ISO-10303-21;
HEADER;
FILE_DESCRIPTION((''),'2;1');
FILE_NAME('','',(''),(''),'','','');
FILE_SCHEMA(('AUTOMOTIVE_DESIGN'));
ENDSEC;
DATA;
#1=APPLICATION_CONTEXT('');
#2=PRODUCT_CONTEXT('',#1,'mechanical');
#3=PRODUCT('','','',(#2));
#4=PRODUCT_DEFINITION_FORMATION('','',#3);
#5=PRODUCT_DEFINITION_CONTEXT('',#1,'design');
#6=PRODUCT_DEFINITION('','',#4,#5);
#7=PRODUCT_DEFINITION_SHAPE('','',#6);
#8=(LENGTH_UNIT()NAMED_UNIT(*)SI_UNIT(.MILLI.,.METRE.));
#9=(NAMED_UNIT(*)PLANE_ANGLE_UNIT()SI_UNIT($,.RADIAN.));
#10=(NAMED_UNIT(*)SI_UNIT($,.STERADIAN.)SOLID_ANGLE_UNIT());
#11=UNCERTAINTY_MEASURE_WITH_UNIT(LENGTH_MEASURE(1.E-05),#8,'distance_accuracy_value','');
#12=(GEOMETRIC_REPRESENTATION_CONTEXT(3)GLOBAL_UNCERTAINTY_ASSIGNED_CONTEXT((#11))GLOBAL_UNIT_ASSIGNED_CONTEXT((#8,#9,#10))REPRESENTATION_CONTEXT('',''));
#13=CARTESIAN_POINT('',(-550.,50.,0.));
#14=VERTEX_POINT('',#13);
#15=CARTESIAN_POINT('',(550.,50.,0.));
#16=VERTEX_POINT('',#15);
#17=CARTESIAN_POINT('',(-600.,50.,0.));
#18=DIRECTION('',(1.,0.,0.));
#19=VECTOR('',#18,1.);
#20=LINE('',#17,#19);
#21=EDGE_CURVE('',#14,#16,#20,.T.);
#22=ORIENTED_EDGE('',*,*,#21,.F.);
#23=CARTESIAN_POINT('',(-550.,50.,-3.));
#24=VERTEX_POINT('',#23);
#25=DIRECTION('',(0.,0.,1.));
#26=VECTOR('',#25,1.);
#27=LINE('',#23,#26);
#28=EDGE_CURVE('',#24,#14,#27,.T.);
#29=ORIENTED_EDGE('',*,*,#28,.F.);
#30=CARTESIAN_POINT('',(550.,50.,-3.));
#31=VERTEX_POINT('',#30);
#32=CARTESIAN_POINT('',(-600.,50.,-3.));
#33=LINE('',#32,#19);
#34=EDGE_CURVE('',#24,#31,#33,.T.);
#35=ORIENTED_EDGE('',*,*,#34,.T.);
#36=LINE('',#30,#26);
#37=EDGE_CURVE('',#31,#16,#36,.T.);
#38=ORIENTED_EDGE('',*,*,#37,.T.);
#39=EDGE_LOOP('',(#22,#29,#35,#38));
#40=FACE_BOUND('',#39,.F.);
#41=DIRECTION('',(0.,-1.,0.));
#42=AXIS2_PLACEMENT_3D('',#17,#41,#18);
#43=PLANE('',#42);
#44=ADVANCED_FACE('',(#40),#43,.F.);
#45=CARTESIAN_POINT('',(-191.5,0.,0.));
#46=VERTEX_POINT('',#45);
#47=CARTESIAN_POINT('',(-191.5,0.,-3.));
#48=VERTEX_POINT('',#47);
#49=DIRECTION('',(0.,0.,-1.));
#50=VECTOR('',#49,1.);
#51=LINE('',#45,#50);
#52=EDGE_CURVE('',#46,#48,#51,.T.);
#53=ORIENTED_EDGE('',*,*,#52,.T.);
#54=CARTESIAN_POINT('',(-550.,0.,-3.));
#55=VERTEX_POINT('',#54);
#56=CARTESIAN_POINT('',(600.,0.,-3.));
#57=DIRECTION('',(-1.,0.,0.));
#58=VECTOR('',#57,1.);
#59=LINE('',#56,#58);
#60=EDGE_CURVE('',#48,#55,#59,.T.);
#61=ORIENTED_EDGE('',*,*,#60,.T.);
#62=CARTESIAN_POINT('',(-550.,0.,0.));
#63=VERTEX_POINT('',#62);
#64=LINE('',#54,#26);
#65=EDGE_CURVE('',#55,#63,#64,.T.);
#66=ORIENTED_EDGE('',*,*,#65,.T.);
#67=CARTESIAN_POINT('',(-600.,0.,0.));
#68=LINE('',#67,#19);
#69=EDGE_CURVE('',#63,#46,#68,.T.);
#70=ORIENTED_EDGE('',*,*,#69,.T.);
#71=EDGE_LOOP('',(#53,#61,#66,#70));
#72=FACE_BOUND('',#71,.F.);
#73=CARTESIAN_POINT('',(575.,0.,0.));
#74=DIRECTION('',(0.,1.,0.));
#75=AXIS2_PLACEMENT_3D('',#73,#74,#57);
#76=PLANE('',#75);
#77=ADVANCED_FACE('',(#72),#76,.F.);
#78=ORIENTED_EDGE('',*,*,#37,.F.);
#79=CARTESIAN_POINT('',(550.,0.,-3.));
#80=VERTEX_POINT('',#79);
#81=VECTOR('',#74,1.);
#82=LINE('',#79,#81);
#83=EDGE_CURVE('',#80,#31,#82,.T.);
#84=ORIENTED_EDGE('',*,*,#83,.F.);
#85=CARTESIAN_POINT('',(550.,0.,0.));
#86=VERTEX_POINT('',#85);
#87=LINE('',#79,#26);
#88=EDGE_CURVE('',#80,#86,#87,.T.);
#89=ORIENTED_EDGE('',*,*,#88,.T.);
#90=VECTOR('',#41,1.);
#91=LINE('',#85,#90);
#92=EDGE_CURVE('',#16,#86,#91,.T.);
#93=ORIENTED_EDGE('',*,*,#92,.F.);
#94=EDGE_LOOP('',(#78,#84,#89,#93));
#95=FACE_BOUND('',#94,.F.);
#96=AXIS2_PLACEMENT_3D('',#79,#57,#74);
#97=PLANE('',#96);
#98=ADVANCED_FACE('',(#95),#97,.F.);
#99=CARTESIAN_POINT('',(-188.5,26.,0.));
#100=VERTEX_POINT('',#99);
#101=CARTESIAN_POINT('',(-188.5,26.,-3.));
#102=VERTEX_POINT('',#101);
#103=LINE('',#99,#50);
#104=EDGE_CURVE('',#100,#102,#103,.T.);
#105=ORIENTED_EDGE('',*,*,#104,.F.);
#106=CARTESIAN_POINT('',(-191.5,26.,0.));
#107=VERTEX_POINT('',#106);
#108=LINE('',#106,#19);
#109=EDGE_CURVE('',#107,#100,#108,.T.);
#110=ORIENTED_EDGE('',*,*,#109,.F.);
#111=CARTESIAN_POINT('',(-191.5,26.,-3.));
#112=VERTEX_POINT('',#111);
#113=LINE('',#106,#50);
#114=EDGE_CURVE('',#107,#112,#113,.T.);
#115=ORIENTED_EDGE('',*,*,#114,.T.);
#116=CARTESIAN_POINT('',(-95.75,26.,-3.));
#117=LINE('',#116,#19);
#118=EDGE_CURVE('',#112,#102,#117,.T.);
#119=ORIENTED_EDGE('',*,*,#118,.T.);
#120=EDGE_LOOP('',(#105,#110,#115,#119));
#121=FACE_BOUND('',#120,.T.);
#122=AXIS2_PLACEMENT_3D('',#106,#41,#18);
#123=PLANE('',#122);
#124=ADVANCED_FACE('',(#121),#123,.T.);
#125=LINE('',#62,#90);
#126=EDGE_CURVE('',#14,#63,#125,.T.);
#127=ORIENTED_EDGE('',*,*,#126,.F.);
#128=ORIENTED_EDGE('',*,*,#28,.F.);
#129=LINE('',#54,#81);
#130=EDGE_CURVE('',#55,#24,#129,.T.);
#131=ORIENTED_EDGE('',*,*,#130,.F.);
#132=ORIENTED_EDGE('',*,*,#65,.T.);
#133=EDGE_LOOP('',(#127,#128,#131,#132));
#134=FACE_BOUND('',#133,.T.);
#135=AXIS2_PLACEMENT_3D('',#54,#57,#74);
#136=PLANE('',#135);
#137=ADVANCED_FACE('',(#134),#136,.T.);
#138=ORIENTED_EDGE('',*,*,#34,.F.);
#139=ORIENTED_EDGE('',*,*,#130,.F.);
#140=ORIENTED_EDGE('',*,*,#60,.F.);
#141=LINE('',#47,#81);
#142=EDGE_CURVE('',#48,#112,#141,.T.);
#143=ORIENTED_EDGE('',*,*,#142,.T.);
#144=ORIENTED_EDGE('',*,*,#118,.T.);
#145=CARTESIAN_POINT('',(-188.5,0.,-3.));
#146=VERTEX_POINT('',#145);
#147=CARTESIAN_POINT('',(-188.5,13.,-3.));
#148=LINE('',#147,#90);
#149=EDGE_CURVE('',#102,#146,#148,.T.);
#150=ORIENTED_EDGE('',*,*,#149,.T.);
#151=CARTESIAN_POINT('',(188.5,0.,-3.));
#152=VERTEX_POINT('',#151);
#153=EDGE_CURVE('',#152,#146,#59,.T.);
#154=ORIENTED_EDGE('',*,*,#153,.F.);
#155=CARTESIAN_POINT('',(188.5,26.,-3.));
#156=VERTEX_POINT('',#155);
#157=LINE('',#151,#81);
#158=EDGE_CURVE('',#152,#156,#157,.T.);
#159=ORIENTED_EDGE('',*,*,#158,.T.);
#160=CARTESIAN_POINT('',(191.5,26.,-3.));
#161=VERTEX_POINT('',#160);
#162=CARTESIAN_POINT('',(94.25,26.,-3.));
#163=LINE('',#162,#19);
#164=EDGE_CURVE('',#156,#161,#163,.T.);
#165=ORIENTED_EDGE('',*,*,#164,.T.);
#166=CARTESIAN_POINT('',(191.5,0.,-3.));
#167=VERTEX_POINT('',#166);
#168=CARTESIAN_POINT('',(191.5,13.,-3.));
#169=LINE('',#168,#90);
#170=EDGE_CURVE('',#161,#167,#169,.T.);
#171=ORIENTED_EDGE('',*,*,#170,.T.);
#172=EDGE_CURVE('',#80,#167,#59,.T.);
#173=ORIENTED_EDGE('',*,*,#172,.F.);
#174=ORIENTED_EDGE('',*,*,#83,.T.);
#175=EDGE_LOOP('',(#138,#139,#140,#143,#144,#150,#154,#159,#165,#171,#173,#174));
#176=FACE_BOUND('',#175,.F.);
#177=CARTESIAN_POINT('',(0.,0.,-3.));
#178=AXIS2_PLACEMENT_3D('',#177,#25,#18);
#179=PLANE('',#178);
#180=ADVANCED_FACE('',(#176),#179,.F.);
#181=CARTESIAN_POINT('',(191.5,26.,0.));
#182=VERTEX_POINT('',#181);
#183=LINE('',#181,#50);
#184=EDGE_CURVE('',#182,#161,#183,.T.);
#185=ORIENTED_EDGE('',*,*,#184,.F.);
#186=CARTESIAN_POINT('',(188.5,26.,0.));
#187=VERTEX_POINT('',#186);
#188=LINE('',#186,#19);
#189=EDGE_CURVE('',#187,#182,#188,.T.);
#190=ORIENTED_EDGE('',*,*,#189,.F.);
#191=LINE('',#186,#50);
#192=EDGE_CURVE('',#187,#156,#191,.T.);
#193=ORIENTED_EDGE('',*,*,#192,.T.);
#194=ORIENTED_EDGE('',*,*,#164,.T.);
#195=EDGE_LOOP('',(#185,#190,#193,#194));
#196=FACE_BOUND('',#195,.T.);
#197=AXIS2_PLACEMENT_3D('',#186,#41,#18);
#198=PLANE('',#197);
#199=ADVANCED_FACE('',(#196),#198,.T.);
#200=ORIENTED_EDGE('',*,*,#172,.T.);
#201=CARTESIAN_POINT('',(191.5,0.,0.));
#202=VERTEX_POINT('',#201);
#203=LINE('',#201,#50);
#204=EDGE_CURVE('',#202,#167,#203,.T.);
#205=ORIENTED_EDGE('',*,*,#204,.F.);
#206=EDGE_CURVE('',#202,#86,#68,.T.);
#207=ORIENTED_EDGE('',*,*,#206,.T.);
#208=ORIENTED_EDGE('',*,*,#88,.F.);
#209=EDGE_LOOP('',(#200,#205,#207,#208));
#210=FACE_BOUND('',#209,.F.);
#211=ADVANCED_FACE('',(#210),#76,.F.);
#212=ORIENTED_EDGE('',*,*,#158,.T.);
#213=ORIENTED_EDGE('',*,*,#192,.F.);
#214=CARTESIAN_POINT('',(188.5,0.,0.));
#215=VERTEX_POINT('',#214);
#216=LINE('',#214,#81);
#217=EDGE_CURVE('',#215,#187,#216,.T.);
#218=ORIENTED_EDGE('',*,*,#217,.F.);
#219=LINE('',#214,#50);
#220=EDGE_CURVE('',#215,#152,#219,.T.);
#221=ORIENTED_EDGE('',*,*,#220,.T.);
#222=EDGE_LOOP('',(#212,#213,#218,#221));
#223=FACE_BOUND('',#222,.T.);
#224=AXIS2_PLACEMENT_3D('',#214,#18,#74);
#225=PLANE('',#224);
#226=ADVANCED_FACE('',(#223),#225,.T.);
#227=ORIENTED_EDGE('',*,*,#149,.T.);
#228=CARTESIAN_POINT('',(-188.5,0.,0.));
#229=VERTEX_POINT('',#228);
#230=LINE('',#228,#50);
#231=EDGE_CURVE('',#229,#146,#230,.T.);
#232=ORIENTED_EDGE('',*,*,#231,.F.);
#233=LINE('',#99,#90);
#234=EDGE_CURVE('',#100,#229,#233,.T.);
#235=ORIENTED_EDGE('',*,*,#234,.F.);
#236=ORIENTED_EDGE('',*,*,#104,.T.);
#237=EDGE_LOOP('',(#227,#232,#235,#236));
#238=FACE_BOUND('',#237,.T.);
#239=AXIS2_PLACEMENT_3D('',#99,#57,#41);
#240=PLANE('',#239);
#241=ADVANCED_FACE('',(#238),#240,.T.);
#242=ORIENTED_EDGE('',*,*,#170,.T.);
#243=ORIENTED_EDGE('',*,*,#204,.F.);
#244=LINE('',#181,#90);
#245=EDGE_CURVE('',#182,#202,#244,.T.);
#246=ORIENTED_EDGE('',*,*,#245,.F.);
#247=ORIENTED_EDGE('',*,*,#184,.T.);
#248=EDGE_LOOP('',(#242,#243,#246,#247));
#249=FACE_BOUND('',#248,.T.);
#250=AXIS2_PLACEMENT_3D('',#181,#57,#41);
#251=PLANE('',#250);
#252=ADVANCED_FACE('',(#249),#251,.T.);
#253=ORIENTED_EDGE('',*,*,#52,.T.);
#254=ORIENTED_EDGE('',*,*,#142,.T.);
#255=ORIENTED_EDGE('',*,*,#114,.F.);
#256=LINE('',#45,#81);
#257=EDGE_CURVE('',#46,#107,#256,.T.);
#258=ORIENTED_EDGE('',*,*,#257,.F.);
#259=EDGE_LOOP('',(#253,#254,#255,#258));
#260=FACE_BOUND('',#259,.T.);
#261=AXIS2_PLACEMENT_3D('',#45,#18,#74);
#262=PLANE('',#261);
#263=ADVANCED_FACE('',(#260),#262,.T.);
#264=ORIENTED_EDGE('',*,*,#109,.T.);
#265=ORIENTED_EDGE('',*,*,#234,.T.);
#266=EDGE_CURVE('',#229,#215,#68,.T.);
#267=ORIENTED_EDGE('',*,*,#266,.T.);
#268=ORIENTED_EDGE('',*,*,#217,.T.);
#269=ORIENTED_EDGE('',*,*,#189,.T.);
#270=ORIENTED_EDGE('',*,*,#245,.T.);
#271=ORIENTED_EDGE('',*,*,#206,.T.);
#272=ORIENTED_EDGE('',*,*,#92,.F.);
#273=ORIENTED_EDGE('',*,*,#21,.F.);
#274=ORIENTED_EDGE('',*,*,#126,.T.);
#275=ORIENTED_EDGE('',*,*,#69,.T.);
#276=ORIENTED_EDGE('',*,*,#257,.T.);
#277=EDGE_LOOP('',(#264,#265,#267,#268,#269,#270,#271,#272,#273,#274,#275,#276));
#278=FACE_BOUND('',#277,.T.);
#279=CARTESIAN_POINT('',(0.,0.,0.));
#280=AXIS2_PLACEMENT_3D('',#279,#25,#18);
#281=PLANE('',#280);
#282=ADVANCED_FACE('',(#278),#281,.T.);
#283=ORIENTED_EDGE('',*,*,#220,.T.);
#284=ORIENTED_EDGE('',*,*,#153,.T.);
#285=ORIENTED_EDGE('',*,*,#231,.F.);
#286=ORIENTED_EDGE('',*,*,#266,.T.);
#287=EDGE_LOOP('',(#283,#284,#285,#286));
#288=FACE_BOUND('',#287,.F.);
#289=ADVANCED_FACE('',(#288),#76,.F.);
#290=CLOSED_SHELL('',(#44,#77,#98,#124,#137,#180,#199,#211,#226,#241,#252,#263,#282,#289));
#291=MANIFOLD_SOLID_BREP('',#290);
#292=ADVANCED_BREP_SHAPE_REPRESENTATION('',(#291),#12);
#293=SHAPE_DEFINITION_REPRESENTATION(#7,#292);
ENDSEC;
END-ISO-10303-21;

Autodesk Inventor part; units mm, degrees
ref_plane "YZ Plane" through (0, 0, 0) normal (1, 0, 0) x (0, 1, 0)
ref_plane "XZ Plane" through (0, 0, 0) normal (0, 1, 0) x (-1, 0, 0)
ref_plane "XY Plane" through (0, 0, 0) normal (0, 0, 1) x (1, 0, 0)
sketch "Sketch1" plane through (0, 0, 0) normal (0, 0, 1) x (1, 0, 0)
  line L0 (-600, 50) -> (600, 50)
  line L1 (600, 50) -> (600, 0)
  line L2 (600, 0) -> (-600, 0)
  line L3 (-600, 0) -> (-600, 50)
  circle A0 centre (-600, 0) radius 25
  circle A1 centre (600, 0) radius 25
  line L4 (600, 0) -> (657.2042, 48)
  line L5 (657.2042, 48) -> (657.2042, 50)
  line L6 (657.2042, 50) -> (600, 50)
  point P0 (0, 0)
  point P1 (0, 0)
  point P2 (-600, 25)
  point P3 (-575, 0)
  point P4 (575, 0)
  point P5 (600, 25)
  point P6 (619.1511, 16.0697)
  dimension "d16" = 50
  dimension "d17" = 1200
  dimension "d18" = 50
  dimension "d19" = 50
  dimension "d32" = 2
  dimension "d33" = 50
extrude "Plate2" add sketch "Sketch1" against normal blind 3 contours L0 L1 A1 L2 A0 L3 | A0 L2 L3 | L1 L2 A1 picked at (-598.1457, 16.4577)
sketch "Sketch2" plane through (0, 0, 0) normal (0, 0, 1) x (1, 0, 0)
  line L0 (-600, 0) -> (600, 0) projected
  line L1 (190, 0) -> (190, 50) construction
  line L2 (600, 50) -> (-600, 50) projected
  line L3 (188.5, 26) -> (191.5, 26)
  line L4 (191.5, 26) -> (191.5, 0)
  line L5 (191.5, 0) -> (188.5, 0)
  line L6 (188.5, 0) -> (188.5, 26)
  line L7 (-190, 50) -> (-190, 0) construction
  line L8 (-191.5, 26) -> (-188.5, 26)
  line L9 (-188.5, 26) -> (-188.5, 0)
  line L10 (-188.5, 0) -> (-191.5, 0)
  line L11 (-191.5, 0) -> (-191.5, 26)
  point P0 (0, 0)
  point P1 (0, 0)
  point P2 (188.5, 0)
  point P3 (0, 0)
  point P4 (-191.5, 0)
  point P5 (-188.5, 0)
  dimension "d21" = 190
  dimension "d22" = 3
  dimension "d23" = 26
  dimension "d29" = 190
  dimension "d30" = 3
  dimension "d31" = 26
extrude "Extrusion1" cut sketch "Sketch2" against normal through all
sketch "Sketch3" plane through (0, 0, -3) normal (0, 0, -1) x (-1, 0, 0)
  line L0 (-191.5, 0) -> (-191.5, 26) projected
  line L1 (-191.5, 26) -> (-188.5, 26) projected
  line L2 (-188.5, 26) -> (-188.5, 0) projected
  line L3 (188.5, 0) -> (-188.5, 0) projected
  line L4 (188.5, 0) -> (188.5, 26) projected
  line L5 (188.5, 26) -> (191.5, 26) projected
  line L6 (191.5, 26) -> (191.5, 0) projected
  line L7 (600, 0) -> (191.5, 0) projected
  line L8 (600, 50) -> (600, 0) projected
  line L9 (-600, 50) -> (600, 50) projected
  line L10 (-600, 0) -> (-600, 50) projected
  line L11 (-191.5, 0) -> (-600, 0) projected
  line L12 (600, 0) -> (191.5, 0) projected
  line L13 (550, 0) -> (550, 50)
  line L14 (-550, 0) -> (-550, 50)
  point P0 (0, 0)
  dimension "d34" = 50
  dimension "d35" = 50
extrude "Extrusion2" cut sketch "Sketch3" against normal through all contours L11 L10 L9 L14 | L9 L8 L7 L13
sketch "Sketch4" plane through (0, 0, 0) normal (0, 0, 1) x (1, 0, 0)
  line L0 (-62.2268, 17.4688) -> (-62.2268, 36.055) construction
  line L1 (-62.2268, 36.055) -> (59.8015, 36.055) construction
  line L2 (59.8015, 36.055) -> (59.8015, 17.4688) construction
  line L3 (59.8015, 17.4688) -> (-62.2268, 17.4688) construction
  point P0 (0, 0)
mark "Mark1"
equation "\"d22\" = Thickness"
equation "\"d29\" = d21"
equation "\"d30\" = Thickness"
equation "\"d31\" = d23"
equation "\"d35\" = d34"
equation "\"d20\" = Thickness"
equation "\"BendReliefWidth\" = Thickness"
equation "\"BendReliefDepth\" = 0.5 * Thickness"
equation "\"CornerReliefSize\" = 4 * Thickness"
equation "\"MinimumRemnant\" = 2 * Thickness"
equation "\"TransitionRadius\" = BendRadius"
equation "\"JacobiRadiusSize\" = BendRadius"
equation "\"GapSize\" = Thickness"
equation "\"Thickness\" = 3"
equation "\"BendRadius\" = 5"
properties part number "MSC 108 rib cone" material "Stainless Steel"
